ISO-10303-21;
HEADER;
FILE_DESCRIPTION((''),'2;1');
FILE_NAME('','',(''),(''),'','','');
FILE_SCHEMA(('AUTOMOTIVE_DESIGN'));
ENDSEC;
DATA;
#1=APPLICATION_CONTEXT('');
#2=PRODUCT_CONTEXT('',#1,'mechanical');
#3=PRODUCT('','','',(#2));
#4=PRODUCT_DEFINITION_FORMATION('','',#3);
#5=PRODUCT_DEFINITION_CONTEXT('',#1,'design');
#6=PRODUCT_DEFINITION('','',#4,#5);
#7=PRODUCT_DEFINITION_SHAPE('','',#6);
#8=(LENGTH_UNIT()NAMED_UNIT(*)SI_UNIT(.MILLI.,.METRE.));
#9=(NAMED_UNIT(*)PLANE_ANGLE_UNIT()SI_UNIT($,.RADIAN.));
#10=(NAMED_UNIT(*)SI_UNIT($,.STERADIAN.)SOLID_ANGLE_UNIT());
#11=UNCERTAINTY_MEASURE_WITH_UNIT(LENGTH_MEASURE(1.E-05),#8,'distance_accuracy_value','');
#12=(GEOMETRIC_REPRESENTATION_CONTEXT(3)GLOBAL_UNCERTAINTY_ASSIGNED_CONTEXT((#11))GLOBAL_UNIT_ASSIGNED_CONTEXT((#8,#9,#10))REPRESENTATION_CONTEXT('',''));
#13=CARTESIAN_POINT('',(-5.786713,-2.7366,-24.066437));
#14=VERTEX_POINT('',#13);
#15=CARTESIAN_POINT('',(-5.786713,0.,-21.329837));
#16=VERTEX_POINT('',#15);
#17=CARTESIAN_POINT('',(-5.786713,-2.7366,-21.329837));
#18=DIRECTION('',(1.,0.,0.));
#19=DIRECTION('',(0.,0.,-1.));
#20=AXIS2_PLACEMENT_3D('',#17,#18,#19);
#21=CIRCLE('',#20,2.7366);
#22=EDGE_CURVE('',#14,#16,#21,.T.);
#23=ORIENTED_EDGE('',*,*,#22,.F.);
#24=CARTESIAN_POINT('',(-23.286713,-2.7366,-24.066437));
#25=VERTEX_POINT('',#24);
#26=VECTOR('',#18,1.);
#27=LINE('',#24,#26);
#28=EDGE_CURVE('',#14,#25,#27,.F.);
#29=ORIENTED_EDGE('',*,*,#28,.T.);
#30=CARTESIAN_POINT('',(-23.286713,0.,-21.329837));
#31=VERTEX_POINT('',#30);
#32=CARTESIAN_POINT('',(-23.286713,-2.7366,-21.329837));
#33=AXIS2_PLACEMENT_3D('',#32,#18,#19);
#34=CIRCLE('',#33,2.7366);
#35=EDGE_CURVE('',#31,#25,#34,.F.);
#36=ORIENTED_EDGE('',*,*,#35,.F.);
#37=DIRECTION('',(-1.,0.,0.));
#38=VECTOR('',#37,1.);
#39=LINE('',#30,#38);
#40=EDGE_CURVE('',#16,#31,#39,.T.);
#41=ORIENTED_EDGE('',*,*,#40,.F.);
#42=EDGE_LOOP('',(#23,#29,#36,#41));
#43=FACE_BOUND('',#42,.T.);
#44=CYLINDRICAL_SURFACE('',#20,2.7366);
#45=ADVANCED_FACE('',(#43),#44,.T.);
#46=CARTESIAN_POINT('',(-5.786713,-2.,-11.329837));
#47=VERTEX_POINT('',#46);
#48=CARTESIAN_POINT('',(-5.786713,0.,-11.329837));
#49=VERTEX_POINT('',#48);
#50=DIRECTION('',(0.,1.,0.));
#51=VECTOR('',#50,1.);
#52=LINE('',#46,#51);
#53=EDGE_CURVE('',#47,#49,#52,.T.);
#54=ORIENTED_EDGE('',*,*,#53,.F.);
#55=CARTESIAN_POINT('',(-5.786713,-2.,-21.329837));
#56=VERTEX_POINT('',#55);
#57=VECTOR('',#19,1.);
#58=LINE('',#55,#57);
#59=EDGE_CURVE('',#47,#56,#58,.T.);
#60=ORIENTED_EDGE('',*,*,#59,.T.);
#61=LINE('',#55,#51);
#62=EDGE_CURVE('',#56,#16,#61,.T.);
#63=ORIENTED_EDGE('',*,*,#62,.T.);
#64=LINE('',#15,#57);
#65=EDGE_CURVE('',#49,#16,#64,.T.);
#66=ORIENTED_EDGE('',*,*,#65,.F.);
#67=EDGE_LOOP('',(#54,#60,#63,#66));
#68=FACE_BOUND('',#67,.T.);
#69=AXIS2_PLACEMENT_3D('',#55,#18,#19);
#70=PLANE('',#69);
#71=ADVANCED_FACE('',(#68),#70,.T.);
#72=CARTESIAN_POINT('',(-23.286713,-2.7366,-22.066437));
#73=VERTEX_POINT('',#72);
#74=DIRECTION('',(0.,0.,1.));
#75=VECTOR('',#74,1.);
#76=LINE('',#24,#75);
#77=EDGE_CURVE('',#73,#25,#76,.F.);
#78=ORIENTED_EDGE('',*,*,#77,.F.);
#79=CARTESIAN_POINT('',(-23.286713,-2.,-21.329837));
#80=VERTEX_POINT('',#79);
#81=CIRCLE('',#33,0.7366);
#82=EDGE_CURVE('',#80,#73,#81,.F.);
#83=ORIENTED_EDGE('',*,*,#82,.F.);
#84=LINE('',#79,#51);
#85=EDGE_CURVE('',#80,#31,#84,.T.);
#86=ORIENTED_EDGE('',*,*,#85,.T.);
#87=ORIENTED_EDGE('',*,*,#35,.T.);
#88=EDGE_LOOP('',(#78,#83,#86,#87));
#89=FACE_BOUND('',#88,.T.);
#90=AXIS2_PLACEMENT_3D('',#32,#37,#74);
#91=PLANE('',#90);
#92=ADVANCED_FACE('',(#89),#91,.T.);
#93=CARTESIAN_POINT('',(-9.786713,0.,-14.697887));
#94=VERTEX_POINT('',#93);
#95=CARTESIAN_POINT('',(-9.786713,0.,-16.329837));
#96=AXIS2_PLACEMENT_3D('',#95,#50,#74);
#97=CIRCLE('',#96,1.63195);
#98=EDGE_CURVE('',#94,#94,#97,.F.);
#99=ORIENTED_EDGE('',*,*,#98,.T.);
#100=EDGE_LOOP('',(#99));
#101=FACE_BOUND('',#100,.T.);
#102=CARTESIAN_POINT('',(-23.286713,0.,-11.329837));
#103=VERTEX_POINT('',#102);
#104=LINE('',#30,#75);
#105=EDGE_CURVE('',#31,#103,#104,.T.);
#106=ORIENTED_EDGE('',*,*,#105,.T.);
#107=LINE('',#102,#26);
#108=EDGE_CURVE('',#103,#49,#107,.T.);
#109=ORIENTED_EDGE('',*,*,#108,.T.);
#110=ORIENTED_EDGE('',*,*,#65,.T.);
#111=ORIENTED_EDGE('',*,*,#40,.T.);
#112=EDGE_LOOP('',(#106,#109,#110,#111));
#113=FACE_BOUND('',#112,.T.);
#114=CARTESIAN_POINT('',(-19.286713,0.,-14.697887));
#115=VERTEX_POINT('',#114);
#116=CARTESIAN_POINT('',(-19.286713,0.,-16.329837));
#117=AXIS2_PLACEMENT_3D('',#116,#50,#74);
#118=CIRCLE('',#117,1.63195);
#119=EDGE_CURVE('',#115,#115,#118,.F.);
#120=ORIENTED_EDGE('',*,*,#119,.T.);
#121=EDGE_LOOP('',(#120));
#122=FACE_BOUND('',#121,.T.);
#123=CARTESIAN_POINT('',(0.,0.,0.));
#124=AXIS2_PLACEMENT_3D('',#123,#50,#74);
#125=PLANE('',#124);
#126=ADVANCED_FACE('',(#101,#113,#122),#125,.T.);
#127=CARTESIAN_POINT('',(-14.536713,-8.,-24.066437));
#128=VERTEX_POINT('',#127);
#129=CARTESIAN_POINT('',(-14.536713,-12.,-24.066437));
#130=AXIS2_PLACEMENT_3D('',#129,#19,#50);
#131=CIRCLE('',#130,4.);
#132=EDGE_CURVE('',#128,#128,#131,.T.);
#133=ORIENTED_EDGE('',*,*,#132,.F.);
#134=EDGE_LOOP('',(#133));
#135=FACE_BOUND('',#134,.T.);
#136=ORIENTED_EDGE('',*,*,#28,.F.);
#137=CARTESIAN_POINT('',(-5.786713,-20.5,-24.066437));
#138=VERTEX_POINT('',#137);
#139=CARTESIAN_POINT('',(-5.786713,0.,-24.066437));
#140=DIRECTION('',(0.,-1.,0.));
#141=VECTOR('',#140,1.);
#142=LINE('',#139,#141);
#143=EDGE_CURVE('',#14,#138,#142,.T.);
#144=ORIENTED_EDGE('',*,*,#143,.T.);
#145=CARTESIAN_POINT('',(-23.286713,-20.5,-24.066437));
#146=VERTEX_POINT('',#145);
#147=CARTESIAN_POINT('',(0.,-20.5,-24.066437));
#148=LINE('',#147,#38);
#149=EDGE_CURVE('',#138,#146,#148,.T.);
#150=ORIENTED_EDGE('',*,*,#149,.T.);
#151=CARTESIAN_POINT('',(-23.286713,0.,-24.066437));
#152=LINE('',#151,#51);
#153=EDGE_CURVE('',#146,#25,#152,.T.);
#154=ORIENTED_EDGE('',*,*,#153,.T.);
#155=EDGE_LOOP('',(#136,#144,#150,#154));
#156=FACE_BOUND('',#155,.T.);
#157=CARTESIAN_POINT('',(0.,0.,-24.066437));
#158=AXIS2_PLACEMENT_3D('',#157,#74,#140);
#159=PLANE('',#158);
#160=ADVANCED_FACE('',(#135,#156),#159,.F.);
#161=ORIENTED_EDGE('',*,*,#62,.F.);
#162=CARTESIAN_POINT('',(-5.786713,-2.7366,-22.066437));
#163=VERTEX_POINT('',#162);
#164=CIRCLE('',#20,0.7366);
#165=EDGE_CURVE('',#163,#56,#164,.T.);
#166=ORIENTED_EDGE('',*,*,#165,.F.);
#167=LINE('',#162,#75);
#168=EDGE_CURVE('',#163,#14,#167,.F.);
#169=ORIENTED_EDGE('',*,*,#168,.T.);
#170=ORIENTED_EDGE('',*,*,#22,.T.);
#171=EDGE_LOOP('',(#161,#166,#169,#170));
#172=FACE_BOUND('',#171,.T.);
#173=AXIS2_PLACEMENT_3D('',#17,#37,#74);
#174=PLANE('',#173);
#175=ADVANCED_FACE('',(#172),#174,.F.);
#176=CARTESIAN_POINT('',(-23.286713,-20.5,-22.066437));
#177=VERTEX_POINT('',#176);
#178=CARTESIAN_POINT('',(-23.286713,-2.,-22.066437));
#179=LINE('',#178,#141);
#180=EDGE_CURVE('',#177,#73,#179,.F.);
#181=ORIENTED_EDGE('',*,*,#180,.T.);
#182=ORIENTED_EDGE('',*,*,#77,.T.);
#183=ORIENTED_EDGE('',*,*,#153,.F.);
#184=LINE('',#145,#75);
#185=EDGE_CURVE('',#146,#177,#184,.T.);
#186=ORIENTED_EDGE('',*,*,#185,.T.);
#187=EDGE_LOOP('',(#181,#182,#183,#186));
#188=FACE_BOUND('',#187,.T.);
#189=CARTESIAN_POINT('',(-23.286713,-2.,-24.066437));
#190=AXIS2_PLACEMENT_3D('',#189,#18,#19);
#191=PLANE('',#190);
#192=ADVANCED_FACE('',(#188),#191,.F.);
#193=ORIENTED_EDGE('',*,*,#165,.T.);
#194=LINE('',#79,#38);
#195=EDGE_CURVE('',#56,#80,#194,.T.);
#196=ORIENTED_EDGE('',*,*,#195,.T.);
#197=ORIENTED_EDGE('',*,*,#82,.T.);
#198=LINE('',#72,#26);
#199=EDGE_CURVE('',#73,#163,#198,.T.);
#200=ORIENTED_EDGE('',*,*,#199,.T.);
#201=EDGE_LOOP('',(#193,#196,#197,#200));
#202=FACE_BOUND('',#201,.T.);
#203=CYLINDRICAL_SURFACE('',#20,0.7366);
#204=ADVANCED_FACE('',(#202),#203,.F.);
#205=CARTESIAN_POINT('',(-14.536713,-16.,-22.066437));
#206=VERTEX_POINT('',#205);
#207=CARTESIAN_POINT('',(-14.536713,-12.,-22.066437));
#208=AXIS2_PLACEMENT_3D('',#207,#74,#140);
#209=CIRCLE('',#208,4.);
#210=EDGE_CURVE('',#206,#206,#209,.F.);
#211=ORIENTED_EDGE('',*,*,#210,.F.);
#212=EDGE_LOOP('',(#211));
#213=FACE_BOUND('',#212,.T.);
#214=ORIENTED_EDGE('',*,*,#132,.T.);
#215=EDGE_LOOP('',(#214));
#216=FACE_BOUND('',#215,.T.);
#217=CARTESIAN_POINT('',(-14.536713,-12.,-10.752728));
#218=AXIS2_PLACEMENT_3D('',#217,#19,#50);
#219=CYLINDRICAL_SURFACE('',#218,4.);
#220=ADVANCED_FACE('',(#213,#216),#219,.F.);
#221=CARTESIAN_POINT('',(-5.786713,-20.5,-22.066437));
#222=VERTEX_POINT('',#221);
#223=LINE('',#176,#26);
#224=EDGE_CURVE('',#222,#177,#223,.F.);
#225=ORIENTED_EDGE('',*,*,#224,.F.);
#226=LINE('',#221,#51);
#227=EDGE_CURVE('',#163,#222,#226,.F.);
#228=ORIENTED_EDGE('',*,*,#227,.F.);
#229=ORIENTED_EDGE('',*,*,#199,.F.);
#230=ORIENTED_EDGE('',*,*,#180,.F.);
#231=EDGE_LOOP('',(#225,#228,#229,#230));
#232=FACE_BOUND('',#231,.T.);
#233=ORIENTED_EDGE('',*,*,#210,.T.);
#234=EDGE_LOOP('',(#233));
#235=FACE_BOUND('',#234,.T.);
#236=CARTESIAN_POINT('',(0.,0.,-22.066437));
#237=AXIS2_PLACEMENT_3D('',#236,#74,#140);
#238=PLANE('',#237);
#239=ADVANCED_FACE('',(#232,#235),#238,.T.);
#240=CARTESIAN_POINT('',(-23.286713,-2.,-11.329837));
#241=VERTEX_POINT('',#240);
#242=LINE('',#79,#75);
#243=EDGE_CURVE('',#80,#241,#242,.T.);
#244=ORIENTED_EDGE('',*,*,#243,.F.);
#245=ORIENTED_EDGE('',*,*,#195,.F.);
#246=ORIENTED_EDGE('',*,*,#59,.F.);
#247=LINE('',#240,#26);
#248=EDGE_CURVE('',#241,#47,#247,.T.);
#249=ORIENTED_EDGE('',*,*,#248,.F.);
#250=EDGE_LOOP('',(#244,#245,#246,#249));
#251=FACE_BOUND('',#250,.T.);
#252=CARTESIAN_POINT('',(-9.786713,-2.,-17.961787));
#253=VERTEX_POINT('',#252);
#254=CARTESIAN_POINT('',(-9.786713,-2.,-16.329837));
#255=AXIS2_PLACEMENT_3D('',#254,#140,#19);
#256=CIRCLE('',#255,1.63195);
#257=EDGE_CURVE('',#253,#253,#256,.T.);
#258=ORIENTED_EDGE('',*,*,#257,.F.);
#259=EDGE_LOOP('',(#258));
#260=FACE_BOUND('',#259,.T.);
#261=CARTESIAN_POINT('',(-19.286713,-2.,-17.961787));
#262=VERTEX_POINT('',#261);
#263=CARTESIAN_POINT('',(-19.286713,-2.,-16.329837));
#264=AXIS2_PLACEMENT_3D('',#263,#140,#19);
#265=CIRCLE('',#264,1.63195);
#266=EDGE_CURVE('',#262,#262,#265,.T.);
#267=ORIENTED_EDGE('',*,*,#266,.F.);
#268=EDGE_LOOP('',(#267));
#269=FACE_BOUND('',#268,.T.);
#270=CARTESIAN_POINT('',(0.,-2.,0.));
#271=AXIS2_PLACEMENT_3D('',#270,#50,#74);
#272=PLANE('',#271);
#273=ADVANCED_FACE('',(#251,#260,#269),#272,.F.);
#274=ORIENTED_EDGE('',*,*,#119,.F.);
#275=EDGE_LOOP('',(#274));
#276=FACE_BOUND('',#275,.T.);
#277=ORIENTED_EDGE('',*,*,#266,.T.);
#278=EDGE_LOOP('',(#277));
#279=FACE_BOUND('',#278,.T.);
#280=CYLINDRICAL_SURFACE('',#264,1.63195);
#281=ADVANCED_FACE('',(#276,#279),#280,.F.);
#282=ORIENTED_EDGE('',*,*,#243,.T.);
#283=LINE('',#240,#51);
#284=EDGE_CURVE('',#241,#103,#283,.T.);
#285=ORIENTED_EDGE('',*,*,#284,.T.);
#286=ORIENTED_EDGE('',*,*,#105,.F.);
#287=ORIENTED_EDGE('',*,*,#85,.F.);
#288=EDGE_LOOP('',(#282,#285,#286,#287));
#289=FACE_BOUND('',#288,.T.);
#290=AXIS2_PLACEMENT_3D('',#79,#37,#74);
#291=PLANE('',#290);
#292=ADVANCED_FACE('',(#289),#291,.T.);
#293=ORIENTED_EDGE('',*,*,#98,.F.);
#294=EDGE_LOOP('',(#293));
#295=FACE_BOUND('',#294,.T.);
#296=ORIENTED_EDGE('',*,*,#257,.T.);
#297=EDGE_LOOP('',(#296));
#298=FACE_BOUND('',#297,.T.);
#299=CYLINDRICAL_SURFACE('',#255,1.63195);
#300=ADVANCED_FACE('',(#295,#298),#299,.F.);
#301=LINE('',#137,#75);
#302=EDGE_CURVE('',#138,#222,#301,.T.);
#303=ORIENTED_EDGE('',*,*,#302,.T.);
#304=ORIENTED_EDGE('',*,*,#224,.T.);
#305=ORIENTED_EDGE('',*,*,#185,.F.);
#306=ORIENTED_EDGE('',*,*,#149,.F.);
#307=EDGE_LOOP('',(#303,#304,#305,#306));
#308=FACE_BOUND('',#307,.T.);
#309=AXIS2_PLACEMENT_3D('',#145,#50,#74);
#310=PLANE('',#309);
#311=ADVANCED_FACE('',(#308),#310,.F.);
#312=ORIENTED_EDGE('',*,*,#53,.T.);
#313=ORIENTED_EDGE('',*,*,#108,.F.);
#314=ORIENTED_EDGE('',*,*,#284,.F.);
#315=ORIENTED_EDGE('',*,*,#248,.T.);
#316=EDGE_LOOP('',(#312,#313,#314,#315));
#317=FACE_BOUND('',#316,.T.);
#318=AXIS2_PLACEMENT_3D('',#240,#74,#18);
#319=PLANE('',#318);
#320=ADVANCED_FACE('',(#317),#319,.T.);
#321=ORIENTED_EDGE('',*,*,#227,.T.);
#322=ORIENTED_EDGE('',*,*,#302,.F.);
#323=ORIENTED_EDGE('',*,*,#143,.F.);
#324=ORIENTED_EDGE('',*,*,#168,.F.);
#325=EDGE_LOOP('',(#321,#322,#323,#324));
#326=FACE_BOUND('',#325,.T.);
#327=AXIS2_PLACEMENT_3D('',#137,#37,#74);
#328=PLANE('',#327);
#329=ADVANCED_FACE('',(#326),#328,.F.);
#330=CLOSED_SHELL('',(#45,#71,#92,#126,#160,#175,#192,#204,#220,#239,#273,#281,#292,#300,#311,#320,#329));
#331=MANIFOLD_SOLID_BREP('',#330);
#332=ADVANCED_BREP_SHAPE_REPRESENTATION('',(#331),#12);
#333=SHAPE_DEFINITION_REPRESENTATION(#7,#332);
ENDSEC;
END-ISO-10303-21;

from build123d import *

# Parameters (mm, degrees)
SKETCH1_W                 = 17.5
SKETCH1_H                 = 10
BASE_FLANGE1_DEPTH        = 2
F_4_CLEARANCE_HOLE1_D     = 3.2639
F_4_CLEARANCE_HOLE1_DEPTH = 2
F_4_CLEARANCE_HOLE1_TIP   = 0.980574487
EDGE_FLANGE1_DEPTH        = 17.5
SKETCH20_R                = 4
CUT_EXTRUDE1_DEPTH        = 2


# Sheet-metal steps are written as plain solids
with BuildPart() as part:
    # Sketch1 → Base-Flange1 (new body)
    with BuildSketch(Plane(origin=(0, 0, 0), x_dir=(1, 0, 0), z_dir=(0, 1, 0))):
        with Locations((-14.536713287, 16.32983683)):
            Rectangle(SKETCH1_W, SKETCH1_H)
    extrude(amount=-BASE_FLANGE1_DEPTH)

    # #4 Clearance Hole1
    with Locations(Plane.XZ.offset(2)):
        with Locations((-9.786713287, -16.32983683), (-19.286713287, -16.32983683)):
            Hole(F_4_CLEARANCE_HOLE1_D / 2, depth=F_4_CLEARANCE_HOLE1_DEPTH)
            with Locations((0, 0, -(F_4_CLEARANCE_HOLE1_DEPTH + F_4_CLEARANCE_HOLE1_TIP / 2))):  # 118° drill point
                Cone(0, F_4_CLEARANCE_HOLE1_D / 2, F_4_CLEARANCE_HOLE1_TIP, mode=Mode.SUBTRACT)

    # Edge-Flange1 section (across the edge) → Edge-Flange1 (add)
    with BuildSketch(Plane(origin=(-23.286713287, -2, -22.06643683), x_dir=(0, 0, 1), z_dir=(1, 0, 0))):
        with BuildLine():
            Line((-2, 0.7366), (-2, 18.5))
            Line((-2, 18.5), (0, 18.5))
            Line((0, 18.5), (0, 0.7366))
            ThreePointArc((0, 0.7366), (0.215745145, 0.215745145), (0.7366, 0))
            Line((0.7366, 0), (0.7366, -2))
            ThreePointArc((0.7366, -2), (-1.198468417, -1.198468417), (-2, 0.7366))
        make_face()
    extrude(amount=EDGE_FLANGE1_DEPTH)

    # Sketch20 → Cut-Extrude1 (cut)
    with BuildSketch(Plane(origin=(0, 0, -24.06643683), x_dir=(-1, 0, 0), z_dir=(0, 0, -1))):
        with Locations(Location((14.536713287, -12, 0), (0, 0, 90))):
            Circle(SKETCH20_R)
    extrude(amount=-CUT_EXTRUDE1_DEPTH, mode=Mode.SUBTRACT)


solid = part.part
